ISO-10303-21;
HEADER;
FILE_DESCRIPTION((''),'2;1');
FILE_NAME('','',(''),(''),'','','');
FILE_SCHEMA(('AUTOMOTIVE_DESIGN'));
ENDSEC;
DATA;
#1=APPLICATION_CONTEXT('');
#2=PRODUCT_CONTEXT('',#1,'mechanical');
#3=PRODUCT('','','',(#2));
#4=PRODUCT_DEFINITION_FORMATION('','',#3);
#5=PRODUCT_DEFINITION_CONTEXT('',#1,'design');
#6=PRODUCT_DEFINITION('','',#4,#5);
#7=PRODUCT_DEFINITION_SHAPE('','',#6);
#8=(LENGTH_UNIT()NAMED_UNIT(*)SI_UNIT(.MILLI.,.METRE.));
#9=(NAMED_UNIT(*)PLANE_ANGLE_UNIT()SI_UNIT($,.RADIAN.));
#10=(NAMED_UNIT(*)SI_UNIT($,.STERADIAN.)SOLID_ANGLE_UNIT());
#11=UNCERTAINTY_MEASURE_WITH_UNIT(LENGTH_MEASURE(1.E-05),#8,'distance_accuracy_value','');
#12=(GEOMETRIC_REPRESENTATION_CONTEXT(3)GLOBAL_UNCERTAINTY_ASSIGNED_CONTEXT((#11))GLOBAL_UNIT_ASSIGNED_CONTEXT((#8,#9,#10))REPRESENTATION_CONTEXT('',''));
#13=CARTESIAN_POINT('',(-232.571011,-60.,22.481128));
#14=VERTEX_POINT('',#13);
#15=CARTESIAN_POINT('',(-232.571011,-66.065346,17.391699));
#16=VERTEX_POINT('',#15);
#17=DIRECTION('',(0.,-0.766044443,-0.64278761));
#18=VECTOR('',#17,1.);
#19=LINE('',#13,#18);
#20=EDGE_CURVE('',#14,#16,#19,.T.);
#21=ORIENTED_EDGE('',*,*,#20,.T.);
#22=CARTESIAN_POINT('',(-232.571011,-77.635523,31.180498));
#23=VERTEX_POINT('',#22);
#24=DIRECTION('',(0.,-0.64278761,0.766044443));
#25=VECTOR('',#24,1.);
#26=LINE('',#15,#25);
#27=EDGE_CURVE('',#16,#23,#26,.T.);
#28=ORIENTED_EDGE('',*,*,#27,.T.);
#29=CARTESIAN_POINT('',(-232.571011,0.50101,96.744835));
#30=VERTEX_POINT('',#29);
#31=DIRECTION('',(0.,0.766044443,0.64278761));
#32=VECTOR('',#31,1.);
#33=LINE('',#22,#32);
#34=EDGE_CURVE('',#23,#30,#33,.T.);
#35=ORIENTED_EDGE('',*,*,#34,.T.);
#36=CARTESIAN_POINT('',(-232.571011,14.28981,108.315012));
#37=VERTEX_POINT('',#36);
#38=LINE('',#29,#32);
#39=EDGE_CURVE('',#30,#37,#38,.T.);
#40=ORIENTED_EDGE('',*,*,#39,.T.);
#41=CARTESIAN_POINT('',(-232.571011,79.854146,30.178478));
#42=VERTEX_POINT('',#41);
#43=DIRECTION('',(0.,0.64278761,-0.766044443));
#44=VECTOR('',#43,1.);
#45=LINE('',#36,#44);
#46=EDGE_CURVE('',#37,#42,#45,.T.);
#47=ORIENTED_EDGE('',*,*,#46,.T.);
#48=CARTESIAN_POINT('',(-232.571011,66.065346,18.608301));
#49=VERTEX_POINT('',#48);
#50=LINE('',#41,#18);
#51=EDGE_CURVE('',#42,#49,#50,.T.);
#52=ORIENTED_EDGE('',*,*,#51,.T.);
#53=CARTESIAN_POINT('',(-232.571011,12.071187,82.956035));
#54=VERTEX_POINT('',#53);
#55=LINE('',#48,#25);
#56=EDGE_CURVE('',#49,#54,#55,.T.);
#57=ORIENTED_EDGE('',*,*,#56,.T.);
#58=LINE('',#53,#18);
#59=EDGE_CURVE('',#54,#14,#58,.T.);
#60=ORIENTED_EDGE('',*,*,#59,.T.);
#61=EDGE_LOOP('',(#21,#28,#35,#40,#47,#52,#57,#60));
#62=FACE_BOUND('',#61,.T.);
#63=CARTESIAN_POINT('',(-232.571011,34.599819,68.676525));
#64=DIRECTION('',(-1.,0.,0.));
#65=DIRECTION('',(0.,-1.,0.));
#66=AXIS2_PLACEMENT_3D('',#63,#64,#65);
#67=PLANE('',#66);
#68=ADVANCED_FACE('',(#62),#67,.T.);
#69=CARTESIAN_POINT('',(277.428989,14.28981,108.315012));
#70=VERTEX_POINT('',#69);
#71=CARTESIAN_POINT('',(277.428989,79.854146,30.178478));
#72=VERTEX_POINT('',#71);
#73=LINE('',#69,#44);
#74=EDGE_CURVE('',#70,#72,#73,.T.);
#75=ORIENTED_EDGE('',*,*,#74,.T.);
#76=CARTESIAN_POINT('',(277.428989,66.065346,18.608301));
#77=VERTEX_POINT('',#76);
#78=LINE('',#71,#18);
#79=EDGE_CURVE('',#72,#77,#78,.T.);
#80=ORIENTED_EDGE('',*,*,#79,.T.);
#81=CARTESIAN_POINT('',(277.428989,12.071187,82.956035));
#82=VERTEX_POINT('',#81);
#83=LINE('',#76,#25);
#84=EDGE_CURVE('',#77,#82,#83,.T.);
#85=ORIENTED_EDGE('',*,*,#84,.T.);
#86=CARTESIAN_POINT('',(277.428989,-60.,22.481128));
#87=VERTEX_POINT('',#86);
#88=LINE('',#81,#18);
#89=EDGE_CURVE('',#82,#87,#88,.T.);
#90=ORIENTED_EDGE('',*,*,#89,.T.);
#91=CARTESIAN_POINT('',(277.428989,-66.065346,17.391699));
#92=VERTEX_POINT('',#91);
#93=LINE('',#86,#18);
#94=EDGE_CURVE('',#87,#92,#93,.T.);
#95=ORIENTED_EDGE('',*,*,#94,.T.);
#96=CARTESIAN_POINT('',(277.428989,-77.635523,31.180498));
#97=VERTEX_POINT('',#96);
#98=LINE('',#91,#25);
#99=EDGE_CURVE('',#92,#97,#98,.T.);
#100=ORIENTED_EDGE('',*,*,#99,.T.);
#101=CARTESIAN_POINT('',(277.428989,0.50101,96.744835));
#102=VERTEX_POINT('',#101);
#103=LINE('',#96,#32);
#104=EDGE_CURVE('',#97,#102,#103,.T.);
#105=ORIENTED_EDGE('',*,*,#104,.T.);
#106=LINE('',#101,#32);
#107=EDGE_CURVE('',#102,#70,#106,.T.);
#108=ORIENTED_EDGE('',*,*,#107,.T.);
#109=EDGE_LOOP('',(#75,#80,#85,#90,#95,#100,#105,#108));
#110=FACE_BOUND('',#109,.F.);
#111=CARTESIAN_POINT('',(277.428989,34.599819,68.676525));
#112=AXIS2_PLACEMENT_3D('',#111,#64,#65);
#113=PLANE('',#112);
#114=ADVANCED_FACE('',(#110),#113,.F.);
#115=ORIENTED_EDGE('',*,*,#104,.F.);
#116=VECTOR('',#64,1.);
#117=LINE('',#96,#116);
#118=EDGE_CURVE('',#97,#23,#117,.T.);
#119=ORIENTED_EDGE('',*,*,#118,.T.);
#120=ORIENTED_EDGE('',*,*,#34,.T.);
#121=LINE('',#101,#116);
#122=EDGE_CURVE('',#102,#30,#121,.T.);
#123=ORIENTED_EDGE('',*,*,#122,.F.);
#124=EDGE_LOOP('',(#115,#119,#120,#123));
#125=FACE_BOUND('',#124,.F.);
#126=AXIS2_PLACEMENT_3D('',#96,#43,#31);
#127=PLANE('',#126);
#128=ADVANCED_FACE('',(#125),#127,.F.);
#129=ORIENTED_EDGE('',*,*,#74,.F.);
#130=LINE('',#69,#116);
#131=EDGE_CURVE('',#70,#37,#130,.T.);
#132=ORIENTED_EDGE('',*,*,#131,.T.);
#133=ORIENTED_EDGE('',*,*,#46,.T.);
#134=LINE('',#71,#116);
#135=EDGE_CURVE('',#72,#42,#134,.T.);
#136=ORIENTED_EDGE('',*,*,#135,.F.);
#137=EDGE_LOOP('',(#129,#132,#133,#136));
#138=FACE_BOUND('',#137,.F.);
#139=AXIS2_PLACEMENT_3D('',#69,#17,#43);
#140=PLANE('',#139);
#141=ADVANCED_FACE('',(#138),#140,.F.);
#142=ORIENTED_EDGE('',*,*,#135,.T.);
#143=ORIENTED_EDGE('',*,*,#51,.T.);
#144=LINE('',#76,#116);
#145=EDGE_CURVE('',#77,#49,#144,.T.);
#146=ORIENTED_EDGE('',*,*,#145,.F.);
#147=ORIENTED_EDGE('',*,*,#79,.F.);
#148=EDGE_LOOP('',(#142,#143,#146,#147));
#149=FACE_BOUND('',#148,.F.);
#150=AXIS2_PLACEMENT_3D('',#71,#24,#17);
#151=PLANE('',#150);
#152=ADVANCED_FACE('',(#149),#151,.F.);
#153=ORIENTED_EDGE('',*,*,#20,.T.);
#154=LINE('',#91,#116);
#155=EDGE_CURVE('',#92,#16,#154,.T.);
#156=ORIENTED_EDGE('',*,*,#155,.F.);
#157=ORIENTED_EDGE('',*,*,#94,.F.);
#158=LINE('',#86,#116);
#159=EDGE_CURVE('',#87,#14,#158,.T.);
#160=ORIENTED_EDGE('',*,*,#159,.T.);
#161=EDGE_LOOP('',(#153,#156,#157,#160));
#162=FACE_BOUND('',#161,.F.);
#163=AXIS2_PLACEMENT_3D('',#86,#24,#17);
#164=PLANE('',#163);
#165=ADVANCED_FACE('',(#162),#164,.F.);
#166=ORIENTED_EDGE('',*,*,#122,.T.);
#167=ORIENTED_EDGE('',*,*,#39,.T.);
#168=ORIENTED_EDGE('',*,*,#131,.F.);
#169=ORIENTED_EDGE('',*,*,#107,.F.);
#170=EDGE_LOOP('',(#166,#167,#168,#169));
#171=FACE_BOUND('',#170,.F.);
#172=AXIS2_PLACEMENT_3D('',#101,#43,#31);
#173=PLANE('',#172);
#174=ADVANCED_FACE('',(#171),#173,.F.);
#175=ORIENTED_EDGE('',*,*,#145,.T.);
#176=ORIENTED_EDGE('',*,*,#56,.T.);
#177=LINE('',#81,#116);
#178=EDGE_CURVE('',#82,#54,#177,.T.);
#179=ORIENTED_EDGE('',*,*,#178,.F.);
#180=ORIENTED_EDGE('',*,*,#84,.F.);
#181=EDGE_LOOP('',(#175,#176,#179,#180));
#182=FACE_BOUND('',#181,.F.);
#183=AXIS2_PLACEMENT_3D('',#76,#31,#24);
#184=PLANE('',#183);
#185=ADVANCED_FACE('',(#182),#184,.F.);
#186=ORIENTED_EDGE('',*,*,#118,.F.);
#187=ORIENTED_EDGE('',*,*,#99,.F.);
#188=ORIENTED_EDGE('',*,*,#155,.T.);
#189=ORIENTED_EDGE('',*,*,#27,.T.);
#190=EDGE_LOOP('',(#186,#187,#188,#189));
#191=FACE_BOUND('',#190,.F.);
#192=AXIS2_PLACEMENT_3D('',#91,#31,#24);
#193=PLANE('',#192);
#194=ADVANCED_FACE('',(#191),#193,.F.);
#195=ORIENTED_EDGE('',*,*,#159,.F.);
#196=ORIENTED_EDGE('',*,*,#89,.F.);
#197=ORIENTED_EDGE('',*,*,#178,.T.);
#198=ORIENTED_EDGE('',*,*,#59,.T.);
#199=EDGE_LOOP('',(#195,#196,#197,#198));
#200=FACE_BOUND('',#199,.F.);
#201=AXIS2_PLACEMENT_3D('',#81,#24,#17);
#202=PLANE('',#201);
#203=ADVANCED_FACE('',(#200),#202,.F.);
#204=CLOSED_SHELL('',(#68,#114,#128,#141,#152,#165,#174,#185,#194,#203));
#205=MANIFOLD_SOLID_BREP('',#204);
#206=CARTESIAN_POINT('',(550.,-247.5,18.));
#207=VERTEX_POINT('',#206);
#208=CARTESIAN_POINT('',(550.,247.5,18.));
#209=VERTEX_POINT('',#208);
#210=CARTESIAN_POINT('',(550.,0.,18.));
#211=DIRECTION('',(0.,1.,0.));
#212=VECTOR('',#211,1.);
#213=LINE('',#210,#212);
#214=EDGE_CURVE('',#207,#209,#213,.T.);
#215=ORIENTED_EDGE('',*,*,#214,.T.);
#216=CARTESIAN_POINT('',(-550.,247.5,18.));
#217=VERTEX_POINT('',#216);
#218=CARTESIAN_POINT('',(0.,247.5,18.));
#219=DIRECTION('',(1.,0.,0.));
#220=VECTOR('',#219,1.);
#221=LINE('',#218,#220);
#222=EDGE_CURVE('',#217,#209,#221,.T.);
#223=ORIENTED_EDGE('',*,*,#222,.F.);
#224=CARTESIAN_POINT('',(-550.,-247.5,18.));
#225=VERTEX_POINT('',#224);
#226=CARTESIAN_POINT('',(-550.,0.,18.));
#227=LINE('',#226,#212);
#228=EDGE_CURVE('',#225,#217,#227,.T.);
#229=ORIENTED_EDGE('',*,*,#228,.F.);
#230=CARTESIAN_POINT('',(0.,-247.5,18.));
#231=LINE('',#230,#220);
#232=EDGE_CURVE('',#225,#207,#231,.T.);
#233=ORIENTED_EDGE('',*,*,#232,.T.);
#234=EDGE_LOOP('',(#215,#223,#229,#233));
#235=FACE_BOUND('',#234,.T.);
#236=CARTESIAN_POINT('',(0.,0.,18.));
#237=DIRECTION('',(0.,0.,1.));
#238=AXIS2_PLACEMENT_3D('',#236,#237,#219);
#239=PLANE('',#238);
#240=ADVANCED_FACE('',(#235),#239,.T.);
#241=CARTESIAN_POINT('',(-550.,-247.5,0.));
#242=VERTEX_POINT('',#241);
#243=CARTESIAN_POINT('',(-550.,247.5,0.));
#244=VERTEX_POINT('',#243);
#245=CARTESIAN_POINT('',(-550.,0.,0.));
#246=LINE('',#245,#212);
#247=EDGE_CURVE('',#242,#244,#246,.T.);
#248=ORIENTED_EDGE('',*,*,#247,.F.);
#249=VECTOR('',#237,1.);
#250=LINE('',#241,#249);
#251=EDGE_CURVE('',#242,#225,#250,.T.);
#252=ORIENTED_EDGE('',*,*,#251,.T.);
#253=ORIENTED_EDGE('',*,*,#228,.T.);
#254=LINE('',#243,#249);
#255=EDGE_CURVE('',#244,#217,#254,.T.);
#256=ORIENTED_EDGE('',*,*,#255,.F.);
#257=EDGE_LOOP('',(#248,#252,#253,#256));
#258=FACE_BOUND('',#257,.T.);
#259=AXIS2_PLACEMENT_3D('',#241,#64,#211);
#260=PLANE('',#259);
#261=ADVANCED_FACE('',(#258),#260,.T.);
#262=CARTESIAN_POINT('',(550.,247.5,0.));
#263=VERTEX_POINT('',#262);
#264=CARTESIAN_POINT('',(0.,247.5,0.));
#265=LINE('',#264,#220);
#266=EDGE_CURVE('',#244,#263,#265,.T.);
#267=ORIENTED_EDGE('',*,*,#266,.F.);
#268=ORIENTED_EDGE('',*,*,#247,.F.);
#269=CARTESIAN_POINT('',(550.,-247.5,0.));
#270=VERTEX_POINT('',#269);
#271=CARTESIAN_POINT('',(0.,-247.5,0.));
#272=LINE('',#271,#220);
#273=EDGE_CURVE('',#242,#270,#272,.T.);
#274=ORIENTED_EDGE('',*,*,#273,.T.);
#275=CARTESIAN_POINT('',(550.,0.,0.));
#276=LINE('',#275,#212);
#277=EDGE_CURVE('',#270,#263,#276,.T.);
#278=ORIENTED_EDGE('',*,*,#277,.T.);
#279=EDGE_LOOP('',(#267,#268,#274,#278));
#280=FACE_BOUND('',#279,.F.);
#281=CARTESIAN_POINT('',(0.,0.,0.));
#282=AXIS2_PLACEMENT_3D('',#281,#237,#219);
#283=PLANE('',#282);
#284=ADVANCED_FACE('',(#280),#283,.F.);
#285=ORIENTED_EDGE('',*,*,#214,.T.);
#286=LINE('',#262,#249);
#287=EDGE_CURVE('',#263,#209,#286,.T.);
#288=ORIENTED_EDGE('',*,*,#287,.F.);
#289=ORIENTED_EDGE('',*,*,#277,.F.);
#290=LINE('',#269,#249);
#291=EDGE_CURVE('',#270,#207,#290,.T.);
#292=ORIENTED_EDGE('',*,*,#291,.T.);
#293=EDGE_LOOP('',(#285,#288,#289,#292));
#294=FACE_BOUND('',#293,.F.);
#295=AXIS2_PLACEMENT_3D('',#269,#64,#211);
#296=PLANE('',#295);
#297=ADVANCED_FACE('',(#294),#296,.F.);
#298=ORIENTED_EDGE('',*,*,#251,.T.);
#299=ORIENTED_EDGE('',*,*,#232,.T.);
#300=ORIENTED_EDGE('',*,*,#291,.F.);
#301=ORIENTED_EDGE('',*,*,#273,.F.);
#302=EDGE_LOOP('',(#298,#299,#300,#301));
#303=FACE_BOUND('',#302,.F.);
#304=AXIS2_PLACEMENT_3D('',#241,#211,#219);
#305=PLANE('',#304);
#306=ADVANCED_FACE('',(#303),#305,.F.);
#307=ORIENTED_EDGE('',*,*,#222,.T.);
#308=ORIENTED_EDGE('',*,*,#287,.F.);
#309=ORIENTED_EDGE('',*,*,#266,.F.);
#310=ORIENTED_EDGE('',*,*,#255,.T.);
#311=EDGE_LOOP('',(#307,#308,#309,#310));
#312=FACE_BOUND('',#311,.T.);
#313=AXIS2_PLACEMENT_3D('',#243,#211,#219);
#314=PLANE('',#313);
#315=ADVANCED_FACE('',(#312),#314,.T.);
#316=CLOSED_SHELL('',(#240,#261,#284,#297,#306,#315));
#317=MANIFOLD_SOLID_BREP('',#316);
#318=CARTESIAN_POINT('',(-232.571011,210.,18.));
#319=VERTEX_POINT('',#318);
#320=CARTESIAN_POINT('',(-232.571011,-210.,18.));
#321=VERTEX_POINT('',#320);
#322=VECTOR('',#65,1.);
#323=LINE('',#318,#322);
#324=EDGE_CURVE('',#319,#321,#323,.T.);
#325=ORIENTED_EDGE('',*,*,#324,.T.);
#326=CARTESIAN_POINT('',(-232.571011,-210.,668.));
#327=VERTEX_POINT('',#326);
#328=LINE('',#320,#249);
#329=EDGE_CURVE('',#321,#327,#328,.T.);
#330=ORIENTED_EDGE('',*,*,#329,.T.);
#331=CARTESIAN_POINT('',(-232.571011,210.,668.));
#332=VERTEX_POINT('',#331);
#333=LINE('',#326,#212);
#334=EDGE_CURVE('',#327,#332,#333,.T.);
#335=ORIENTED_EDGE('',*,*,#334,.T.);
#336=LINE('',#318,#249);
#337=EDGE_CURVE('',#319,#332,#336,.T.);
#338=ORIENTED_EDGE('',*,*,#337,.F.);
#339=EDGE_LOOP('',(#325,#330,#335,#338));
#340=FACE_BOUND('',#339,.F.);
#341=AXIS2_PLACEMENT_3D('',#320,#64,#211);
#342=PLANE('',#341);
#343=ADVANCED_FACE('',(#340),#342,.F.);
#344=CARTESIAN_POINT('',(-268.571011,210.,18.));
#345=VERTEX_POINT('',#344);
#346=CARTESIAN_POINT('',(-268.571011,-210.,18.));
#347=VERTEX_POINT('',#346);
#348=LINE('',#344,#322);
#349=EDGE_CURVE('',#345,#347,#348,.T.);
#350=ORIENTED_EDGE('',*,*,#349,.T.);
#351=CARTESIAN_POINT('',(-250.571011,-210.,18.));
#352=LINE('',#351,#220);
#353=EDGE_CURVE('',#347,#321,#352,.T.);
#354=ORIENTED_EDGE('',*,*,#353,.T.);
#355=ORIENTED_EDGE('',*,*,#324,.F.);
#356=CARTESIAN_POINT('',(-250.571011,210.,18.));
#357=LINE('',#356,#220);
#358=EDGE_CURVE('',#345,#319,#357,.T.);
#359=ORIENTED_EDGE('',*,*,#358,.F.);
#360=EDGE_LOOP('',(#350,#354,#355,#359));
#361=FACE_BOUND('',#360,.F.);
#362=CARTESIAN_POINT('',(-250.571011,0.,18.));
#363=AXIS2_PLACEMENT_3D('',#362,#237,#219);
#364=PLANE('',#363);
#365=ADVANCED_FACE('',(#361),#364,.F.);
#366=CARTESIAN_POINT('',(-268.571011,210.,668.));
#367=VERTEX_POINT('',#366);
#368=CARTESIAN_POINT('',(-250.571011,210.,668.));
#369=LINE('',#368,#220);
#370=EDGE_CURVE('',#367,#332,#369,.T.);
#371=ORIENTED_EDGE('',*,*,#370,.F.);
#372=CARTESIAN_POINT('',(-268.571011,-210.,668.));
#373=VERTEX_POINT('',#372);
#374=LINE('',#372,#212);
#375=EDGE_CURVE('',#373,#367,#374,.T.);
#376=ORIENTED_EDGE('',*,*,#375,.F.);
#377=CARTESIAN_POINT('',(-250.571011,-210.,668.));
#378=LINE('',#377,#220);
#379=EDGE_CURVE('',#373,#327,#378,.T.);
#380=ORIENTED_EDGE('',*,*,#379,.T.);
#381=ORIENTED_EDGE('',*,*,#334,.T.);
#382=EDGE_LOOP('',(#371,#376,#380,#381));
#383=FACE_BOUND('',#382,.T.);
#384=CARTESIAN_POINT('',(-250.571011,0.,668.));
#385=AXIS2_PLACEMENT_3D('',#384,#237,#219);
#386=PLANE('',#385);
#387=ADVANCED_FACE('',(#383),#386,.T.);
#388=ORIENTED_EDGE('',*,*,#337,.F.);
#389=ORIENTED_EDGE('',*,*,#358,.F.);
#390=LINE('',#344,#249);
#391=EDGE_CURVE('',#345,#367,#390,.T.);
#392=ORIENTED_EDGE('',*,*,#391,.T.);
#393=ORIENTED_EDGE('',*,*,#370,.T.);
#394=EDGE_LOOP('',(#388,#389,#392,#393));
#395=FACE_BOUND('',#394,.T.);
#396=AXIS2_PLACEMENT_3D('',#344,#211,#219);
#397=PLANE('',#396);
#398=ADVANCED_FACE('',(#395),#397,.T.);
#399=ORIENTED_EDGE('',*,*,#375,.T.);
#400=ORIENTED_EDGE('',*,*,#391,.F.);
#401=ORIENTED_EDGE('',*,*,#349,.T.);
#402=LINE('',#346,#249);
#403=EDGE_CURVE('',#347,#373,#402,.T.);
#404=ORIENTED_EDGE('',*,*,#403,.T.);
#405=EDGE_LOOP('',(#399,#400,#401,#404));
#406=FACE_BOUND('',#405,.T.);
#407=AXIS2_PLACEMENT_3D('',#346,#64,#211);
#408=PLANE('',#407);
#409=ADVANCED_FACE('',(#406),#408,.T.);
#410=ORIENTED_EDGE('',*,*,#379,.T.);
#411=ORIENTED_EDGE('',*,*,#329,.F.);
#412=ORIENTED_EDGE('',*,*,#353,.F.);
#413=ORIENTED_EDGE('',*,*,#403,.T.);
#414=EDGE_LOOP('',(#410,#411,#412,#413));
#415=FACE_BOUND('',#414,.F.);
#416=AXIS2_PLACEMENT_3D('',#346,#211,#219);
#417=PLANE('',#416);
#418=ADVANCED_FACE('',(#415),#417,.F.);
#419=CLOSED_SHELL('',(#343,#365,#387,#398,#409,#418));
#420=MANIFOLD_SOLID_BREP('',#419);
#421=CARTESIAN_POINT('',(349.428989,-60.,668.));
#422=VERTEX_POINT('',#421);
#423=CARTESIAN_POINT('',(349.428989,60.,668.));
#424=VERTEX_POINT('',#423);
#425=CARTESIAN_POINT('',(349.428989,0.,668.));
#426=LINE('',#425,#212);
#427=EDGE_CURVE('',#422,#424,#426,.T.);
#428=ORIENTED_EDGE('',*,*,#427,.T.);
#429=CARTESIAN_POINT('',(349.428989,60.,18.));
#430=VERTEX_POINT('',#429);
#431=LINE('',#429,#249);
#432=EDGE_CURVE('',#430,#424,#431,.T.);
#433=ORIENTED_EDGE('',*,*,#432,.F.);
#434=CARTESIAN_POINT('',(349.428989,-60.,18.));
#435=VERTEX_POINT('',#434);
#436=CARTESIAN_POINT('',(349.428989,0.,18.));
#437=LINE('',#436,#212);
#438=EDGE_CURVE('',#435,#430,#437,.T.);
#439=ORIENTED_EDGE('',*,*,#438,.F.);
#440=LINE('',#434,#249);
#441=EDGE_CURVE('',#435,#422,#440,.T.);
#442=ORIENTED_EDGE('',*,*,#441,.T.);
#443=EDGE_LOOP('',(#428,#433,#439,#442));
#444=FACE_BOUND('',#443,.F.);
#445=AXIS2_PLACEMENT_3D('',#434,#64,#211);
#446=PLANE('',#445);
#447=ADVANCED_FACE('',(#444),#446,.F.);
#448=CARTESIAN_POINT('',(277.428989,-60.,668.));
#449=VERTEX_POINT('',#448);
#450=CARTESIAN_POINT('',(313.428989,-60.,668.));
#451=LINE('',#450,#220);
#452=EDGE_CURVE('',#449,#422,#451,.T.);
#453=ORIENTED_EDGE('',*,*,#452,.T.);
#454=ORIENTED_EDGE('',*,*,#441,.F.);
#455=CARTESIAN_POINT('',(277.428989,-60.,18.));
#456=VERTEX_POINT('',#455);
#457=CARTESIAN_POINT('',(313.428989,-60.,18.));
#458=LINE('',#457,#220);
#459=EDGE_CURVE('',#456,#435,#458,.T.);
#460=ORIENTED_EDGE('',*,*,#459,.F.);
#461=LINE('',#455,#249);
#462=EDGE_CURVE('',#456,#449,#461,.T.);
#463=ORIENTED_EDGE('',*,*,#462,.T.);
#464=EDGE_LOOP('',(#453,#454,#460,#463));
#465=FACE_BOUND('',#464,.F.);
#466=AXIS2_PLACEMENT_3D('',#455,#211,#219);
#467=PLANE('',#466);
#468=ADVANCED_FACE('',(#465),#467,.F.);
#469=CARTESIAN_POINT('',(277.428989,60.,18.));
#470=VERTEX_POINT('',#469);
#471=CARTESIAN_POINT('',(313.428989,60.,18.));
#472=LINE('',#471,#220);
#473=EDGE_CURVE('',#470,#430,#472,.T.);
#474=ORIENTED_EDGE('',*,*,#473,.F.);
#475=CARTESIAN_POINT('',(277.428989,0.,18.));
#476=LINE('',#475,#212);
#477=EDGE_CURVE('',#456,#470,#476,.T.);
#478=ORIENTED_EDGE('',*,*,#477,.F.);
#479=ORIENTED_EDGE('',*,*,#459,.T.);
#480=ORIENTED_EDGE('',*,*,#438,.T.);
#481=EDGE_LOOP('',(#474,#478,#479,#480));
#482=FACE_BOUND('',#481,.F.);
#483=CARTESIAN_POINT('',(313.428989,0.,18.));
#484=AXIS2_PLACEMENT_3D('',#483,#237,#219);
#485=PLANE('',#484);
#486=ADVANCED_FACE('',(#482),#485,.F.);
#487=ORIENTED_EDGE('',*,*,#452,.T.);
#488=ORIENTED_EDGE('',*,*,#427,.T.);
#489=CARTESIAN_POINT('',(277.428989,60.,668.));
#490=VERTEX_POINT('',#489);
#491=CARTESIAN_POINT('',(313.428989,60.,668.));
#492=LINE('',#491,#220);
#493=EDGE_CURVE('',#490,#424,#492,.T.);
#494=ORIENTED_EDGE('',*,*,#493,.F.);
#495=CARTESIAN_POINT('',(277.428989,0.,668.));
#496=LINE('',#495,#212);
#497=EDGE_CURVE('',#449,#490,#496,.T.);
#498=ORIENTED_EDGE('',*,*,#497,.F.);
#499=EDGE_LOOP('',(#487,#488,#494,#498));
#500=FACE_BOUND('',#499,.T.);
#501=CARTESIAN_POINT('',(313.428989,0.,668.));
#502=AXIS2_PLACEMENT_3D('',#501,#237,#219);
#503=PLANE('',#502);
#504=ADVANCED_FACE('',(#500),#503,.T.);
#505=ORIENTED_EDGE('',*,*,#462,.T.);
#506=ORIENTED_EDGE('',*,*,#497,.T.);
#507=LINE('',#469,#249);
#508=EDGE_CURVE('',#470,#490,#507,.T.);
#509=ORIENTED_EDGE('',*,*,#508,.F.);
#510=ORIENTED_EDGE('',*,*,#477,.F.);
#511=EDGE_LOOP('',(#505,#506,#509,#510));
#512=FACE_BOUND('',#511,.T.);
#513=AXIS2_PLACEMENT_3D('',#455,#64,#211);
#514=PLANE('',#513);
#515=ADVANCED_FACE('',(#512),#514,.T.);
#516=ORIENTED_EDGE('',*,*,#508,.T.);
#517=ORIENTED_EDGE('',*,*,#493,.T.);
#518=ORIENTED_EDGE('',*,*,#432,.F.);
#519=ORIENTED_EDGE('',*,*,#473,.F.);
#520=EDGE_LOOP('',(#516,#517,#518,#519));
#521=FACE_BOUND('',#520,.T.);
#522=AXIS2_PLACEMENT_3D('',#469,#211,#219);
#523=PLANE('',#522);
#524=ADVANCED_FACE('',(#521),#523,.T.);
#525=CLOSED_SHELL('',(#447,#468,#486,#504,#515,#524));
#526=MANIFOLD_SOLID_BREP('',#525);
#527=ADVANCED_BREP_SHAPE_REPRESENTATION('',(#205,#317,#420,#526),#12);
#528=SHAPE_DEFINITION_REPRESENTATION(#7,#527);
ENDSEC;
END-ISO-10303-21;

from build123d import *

# Parameters (mm, degrees)
F0_W     = 1100
F0_H     = 495
F1_DEPTH = 18
F2_W     = 36
F2_H     = 420
F3_DEPTH = 650
F2_W_2   = 72
F2_H_2   = 120
F4_W     = 120
F4_H     = 650
F5_DEPTH = 899.4299889932
F7_DEPTH = 650
F9_DEPTH = 510


# Not quite as in the source:
# - a feature names something its author has since deleted; it is built from what else it names


with BuildPart() as f1:
    # F0 (on Top) → F1 (new body)
    with BuildSketch(Plane.XY):
        Rectangle(F0_W, F0_H)
    extrude(amount=F1_DEPTH)


with BuildPart() as f3:
    # F2 (on face) → F3 (new body)
    with BuildSketch(Plane.XY.offset(18)):
        with Locations((-250.5710110068, 0)):
            Rectangle(F2_W, F2_H)
    extrude(amount=F3_DEPTH)


with BuildPart() as f3b:
    # F2 (on face) → F3, piece 2 (new body)
    with BuildSketch(Plane.XY.offset(18)):
        with Locations((313.4289889932, 0)):
            Rectangle(F2_W_2, F2_H_2)
    extrude(amount=F3_DEPTH)


with BuildPart() as f5_tool:
    # F4 (on face) → F5 (new body, through all)
    with BuildSketch(Plane.YZ.offset(349.4289889932)):
        with Locations((0, 343)):
            Rectangle(F4_W, F4_H)
    extrude(amount=-F5_DEPTH)


with BuildPart() as f3_1:
    add(f3.part)

    # F5: cut by f5_tool
    add(f5_tool.part, mode=Mode.SUBTRACT)

    # F2 (on face) → F7 (join)
    with BuildSketch(Plane.XY.offset(18)):
        with Locations((-250.5710110068, 0)):
            Rectangle(F2_W, F2_H)
    extrude(amount=F7_DEPTH)


with BuildPart() as f3b_1:
    add(f3b.part)

    # F5: cut by f5_tool
    add(f5_tool.part, mode=Mode.SUBTRACT)


with BuildPart() as f7:
    # F2 (on face) → F7, piece 2 (new body)
    with BuildSketch(Plane.XY.offset(18)):
        with Locations((313.4289889932, 0)):
            Rectangle(F2_W_2, F2_H_2)
    extrude(amount=F7_DEPTH)


with BuildPart() as f9:
    # F8 (on face) → F9 (new body)
    with BuildSketch(Plane(origin=(277.4289889932, 0, 0), x_dir=(0, -1, 0), z_dir=(-1, 0, 0))):
        Polygon((-0.5010100179, 96.7448346812), (-14.289809994, 108.3150116555), (-60, 53.8397284977), (-60, 25.8366996142), (-12.0711869922, 82.956034705), align=None)
        Polygon((60, 45.9784594893), (-0.5010100179, 96.7448346812), (-12.0711869922, 82.956034705), (60, 22.4811282813), align=None)
        Polygon((77.6355231803, 31.1804984931), (60, 45.9784594893), (60, 22.4811282813), (66.0653462059, 17.391698517), align=None)
        Polygon((-60, 25.8366996142), (-60, 53.8397284977), (-79.854146182, 30.1784784574), (-66.0653462059, 18.608301483), align=None)
    extrude(amount=F9_DEPTH)


solid = Compound([f1.part, f3_1.part, f7.part, f9.part])
